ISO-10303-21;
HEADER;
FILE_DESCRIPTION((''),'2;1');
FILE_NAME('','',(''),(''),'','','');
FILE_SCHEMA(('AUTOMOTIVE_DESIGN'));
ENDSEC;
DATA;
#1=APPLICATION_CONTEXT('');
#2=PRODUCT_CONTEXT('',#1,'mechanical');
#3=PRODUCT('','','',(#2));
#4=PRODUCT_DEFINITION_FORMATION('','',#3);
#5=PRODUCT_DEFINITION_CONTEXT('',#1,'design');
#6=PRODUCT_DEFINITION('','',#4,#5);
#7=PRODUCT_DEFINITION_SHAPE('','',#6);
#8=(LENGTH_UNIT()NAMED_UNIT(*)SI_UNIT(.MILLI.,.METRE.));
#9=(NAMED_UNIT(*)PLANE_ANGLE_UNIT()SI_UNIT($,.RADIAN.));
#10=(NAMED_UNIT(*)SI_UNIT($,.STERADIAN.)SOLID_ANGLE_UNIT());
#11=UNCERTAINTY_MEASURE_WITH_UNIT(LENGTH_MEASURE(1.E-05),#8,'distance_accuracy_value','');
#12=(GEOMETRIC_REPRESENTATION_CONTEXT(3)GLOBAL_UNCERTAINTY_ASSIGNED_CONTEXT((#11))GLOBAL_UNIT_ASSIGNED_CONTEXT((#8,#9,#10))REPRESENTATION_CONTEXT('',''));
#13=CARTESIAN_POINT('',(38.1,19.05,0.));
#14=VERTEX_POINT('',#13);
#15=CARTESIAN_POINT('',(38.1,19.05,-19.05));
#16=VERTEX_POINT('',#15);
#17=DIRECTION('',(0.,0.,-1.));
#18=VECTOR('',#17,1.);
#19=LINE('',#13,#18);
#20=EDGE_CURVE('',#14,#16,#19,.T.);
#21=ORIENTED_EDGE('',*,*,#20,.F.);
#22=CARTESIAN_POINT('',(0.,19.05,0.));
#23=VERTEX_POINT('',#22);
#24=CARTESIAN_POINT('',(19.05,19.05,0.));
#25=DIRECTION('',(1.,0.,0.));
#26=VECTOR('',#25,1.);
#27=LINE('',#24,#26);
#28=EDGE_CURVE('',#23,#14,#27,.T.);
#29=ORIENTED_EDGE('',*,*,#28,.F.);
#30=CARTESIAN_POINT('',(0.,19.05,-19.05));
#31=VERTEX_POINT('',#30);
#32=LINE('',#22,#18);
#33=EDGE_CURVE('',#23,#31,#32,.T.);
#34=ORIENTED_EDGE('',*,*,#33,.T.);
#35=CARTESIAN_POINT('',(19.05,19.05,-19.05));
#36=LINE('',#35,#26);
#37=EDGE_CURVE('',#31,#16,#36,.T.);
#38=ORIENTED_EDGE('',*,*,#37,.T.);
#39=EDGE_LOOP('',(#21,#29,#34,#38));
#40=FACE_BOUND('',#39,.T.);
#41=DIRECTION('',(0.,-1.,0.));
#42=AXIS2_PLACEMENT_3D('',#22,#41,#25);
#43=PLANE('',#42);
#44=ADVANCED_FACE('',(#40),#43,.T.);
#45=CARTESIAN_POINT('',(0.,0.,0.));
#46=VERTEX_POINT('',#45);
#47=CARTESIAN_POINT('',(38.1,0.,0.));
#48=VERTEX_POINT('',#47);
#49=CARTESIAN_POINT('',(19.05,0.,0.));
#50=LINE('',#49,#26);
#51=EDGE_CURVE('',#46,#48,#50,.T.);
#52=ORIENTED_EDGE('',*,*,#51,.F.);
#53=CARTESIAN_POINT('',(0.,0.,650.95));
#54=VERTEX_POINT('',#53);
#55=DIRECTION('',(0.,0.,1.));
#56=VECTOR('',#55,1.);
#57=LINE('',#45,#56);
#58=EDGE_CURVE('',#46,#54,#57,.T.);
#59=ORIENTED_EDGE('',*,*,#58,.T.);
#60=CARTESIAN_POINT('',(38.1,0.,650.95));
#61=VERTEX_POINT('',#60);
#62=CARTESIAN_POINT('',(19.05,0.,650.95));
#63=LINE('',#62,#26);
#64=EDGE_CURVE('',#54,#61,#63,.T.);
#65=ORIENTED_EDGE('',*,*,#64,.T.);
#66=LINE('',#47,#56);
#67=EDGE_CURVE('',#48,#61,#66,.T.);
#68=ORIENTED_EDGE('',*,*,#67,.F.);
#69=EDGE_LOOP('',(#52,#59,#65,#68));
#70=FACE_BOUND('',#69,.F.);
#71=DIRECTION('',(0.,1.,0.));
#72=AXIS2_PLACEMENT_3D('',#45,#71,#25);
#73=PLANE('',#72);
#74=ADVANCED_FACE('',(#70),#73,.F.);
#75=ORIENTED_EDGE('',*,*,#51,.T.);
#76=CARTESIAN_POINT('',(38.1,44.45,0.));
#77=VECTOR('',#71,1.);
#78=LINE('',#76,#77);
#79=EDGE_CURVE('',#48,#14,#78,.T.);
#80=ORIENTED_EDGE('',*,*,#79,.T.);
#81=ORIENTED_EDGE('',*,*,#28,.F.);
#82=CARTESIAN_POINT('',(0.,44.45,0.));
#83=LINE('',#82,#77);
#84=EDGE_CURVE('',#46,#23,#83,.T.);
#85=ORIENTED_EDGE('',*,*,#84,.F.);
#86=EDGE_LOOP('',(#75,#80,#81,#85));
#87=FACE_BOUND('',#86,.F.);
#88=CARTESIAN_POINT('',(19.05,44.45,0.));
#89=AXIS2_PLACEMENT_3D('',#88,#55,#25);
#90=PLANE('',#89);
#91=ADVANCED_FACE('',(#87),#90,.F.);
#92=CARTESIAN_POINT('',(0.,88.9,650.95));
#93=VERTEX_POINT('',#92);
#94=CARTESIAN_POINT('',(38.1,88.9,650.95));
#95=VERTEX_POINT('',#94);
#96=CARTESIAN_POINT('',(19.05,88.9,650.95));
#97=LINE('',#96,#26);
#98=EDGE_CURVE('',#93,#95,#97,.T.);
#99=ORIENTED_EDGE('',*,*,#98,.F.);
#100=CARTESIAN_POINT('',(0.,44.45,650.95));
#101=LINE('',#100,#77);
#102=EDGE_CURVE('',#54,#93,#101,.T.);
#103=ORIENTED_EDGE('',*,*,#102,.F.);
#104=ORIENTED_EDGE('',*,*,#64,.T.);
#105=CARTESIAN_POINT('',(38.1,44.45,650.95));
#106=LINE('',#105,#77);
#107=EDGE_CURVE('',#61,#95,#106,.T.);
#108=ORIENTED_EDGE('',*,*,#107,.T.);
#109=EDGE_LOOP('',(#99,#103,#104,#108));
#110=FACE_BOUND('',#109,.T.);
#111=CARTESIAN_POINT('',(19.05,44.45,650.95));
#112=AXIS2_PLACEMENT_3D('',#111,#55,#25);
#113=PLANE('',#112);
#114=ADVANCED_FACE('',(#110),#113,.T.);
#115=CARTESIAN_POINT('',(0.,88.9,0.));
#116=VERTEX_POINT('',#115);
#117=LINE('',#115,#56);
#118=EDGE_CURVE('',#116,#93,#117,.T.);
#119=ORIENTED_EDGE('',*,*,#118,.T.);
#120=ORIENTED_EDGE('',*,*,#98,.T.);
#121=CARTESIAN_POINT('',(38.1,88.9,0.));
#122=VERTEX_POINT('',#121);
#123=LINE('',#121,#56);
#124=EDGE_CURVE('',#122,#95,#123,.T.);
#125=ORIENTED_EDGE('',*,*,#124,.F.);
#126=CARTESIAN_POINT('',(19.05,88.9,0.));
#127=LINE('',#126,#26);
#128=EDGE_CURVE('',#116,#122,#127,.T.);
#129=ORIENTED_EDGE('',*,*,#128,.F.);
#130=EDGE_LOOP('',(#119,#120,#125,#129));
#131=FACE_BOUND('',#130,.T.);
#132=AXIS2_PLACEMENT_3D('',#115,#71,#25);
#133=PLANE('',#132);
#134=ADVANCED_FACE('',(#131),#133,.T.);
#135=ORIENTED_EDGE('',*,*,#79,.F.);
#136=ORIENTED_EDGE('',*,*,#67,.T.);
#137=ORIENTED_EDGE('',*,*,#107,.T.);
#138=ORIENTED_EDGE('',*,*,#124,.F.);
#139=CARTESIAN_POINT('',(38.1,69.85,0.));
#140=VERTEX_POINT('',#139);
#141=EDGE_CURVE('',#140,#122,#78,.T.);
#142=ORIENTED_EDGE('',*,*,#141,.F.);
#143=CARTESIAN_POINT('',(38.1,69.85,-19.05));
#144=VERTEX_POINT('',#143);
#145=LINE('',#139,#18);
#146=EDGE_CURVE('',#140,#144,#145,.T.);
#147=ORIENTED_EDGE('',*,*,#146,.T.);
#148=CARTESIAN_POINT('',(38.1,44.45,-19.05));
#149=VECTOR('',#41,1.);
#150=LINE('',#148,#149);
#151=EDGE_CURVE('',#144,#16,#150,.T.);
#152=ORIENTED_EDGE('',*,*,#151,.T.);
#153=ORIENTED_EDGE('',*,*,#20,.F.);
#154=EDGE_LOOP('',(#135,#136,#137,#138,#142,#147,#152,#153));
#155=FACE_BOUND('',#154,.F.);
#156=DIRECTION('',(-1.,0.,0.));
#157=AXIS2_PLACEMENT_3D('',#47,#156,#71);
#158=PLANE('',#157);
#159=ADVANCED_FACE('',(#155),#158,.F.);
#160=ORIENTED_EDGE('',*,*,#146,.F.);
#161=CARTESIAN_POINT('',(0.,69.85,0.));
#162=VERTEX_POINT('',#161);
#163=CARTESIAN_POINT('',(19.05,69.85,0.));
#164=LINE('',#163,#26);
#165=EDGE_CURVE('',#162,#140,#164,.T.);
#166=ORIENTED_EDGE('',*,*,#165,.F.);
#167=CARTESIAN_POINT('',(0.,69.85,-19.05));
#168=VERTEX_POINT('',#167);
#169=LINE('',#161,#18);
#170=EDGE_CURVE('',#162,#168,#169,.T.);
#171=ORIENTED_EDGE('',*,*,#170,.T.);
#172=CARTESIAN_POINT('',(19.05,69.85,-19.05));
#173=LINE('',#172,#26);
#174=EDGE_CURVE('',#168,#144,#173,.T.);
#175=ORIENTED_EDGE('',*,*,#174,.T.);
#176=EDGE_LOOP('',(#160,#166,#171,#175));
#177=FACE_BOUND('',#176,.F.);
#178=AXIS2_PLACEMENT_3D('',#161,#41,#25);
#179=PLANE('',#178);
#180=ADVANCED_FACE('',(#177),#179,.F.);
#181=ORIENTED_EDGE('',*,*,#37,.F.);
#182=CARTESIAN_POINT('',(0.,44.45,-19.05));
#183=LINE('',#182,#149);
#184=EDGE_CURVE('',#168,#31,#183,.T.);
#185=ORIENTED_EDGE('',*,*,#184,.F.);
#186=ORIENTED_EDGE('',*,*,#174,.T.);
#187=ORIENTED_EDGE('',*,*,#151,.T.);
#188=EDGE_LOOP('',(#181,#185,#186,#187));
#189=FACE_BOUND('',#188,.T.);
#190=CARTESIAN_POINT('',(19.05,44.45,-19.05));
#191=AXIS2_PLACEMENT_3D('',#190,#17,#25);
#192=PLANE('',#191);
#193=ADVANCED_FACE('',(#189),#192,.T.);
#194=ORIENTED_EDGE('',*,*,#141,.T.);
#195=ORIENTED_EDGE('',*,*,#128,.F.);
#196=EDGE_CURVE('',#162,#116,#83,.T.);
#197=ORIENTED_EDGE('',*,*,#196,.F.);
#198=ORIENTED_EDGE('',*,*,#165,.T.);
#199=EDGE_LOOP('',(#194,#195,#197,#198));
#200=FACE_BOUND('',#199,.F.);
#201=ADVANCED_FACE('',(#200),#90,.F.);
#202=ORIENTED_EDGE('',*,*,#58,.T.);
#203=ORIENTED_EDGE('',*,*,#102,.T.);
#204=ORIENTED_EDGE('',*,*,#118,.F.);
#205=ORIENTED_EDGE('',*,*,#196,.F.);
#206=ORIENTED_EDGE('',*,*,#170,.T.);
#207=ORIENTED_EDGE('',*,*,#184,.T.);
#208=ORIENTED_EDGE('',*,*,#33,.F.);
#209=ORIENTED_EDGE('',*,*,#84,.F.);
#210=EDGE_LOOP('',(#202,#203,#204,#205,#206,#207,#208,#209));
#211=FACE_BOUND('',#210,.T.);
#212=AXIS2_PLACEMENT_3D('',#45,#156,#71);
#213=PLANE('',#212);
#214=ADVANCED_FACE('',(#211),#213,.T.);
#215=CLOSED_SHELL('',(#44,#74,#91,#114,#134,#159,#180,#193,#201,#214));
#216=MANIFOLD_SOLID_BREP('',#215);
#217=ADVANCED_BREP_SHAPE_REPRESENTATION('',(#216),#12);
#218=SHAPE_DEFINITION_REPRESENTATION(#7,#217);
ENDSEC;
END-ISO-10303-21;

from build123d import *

# Parameters (mm, degrees)
F0_W     = 38.1
F0_H     = 88.9
F1_DEPTH = 650.95
F2_W     = 38.1
F2_H     = 50.8
F3_DEPTH = 19.05


# Not quite as in the source:
# - a length typed as a fraction of an inch, garbled in the dataset ("3 / 203.2 mm" for 3/8 in), is restored


with BuildPart() as f1:
    # F0 (on Top) → F1 (new body)
    with BuildSketch(Plane.XY):
        with Locations((19.05, 44.45)):
            Rectangle(F0_W, F0_H)
    extrude(amount=F1_DEPTH)

    # F2 (on face) → F3 (join)
    with BuildSketch(Plane(origin=(0, 0, 0), x_dir=(1, 0, 0), z_dir=(0, 0, -1))):
        with Locations((19.05, -44.45)):
            Rectangle(F2_W, F2_H)
    extrude(amount=F3_DEPTH)


solid = f1.part
